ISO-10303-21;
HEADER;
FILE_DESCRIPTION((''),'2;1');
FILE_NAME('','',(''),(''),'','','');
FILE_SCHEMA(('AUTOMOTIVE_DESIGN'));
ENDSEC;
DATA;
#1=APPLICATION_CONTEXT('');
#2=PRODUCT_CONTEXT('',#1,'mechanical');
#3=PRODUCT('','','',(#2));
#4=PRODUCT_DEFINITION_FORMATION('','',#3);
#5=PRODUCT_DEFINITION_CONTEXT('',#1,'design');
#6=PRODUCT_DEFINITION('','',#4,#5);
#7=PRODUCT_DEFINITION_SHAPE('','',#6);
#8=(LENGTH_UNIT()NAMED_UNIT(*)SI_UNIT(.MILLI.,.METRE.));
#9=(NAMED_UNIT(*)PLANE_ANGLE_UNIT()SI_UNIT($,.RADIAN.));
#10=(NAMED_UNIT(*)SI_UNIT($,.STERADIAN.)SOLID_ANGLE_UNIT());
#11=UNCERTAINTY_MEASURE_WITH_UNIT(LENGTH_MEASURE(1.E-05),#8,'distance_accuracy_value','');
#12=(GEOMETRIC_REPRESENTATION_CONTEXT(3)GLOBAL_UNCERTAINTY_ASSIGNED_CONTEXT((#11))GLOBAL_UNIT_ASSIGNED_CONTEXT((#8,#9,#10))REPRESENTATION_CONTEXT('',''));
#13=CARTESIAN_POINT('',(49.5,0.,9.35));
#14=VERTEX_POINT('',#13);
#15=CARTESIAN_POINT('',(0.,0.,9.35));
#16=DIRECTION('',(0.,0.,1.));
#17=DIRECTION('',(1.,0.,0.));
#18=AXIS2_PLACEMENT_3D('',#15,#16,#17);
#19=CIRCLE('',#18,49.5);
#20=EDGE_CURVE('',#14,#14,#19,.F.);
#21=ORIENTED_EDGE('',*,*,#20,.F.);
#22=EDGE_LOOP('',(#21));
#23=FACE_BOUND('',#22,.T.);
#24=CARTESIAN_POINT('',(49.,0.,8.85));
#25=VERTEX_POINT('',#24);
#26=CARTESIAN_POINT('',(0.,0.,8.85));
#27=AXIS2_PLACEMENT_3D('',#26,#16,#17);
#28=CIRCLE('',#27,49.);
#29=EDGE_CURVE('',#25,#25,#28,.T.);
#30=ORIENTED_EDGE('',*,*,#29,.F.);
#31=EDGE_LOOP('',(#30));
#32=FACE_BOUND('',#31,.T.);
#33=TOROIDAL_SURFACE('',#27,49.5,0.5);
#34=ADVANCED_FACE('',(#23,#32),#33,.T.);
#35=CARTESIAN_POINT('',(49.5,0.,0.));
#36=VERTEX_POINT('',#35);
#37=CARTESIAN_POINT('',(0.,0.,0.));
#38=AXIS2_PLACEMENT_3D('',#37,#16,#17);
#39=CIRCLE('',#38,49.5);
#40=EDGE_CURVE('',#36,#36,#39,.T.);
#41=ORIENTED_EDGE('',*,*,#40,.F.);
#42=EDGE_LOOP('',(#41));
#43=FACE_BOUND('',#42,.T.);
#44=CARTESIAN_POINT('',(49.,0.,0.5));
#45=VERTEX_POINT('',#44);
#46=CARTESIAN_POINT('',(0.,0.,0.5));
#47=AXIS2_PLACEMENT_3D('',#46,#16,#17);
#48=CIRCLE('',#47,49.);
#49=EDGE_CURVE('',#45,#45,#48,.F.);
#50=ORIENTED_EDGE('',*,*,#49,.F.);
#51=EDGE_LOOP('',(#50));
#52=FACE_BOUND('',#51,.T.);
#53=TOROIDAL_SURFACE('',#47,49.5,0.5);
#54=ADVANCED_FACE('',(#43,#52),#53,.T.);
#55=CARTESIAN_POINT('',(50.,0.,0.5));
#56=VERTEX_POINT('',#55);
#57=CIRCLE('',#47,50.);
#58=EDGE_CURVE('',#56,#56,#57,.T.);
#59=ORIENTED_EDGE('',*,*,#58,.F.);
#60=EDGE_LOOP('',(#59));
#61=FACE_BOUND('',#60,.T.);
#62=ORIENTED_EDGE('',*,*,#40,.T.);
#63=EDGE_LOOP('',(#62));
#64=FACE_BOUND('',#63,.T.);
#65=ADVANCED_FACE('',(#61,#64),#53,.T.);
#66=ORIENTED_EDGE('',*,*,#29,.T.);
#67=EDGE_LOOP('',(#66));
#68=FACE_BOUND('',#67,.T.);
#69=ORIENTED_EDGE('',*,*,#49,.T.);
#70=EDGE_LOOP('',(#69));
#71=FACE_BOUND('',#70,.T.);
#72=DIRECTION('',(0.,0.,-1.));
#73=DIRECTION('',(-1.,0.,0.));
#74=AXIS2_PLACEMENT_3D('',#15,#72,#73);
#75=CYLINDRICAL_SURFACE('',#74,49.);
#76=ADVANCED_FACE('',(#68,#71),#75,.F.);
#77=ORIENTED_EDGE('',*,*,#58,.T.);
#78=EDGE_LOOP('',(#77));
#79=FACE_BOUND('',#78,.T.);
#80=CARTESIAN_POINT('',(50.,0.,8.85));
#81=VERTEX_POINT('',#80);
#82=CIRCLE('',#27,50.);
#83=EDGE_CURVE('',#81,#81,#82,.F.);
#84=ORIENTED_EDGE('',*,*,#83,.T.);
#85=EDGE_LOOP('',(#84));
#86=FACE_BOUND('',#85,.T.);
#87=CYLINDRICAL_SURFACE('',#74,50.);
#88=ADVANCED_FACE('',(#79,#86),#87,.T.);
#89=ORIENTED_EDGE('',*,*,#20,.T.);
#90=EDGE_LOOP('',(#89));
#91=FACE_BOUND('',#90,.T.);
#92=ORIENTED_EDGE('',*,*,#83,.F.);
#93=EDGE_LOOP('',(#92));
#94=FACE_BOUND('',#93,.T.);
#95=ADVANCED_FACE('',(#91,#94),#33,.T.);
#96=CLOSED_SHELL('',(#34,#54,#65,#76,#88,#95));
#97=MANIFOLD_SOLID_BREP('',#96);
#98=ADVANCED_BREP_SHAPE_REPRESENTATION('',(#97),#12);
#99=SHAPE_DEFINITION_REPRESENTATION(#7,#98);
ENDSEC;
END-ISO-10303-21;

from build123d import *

# Parameters (mm, degrees)
ESQUISSE1_R        = 50
BOSS_EXTRU_1_DEPTH = 9.35
COQUE1_T           = -1
CONG_1_R           = 0.5


with BuildPart() as part:
    # Esquisse1 → Boss.-Extru.1 (new body)
    with BuildSketch(Plane.XY):
        Circle(ESQUISSE1_R)
    extrude(amount=BOSS_EXTRU_1_DEPTH)

    # Coque1
    coque1_openings = [part.faces().sort_by_distance(p)[0] for p in [
        (0, 0, 9.35),
        (0, 0, 0),
    ]]
    offset(amount=COQUE1_T, openings=coque1_openings, kind=Kind.INTERSECTION)

    # Congé1
    cong_1_edges = [part.edges().sort_by_distance(p)[0] for p in [
        (-50, 0, 0),
        (-50, 0, 9.35),
        (-49, 0, 0),
        (-49, 0, 9.35),
    ]]
    fillet(cong_1_edges, radius=CONG_1_R - 0.0001)  # a hair under: the kernel refuses the full size


solid = part.part
